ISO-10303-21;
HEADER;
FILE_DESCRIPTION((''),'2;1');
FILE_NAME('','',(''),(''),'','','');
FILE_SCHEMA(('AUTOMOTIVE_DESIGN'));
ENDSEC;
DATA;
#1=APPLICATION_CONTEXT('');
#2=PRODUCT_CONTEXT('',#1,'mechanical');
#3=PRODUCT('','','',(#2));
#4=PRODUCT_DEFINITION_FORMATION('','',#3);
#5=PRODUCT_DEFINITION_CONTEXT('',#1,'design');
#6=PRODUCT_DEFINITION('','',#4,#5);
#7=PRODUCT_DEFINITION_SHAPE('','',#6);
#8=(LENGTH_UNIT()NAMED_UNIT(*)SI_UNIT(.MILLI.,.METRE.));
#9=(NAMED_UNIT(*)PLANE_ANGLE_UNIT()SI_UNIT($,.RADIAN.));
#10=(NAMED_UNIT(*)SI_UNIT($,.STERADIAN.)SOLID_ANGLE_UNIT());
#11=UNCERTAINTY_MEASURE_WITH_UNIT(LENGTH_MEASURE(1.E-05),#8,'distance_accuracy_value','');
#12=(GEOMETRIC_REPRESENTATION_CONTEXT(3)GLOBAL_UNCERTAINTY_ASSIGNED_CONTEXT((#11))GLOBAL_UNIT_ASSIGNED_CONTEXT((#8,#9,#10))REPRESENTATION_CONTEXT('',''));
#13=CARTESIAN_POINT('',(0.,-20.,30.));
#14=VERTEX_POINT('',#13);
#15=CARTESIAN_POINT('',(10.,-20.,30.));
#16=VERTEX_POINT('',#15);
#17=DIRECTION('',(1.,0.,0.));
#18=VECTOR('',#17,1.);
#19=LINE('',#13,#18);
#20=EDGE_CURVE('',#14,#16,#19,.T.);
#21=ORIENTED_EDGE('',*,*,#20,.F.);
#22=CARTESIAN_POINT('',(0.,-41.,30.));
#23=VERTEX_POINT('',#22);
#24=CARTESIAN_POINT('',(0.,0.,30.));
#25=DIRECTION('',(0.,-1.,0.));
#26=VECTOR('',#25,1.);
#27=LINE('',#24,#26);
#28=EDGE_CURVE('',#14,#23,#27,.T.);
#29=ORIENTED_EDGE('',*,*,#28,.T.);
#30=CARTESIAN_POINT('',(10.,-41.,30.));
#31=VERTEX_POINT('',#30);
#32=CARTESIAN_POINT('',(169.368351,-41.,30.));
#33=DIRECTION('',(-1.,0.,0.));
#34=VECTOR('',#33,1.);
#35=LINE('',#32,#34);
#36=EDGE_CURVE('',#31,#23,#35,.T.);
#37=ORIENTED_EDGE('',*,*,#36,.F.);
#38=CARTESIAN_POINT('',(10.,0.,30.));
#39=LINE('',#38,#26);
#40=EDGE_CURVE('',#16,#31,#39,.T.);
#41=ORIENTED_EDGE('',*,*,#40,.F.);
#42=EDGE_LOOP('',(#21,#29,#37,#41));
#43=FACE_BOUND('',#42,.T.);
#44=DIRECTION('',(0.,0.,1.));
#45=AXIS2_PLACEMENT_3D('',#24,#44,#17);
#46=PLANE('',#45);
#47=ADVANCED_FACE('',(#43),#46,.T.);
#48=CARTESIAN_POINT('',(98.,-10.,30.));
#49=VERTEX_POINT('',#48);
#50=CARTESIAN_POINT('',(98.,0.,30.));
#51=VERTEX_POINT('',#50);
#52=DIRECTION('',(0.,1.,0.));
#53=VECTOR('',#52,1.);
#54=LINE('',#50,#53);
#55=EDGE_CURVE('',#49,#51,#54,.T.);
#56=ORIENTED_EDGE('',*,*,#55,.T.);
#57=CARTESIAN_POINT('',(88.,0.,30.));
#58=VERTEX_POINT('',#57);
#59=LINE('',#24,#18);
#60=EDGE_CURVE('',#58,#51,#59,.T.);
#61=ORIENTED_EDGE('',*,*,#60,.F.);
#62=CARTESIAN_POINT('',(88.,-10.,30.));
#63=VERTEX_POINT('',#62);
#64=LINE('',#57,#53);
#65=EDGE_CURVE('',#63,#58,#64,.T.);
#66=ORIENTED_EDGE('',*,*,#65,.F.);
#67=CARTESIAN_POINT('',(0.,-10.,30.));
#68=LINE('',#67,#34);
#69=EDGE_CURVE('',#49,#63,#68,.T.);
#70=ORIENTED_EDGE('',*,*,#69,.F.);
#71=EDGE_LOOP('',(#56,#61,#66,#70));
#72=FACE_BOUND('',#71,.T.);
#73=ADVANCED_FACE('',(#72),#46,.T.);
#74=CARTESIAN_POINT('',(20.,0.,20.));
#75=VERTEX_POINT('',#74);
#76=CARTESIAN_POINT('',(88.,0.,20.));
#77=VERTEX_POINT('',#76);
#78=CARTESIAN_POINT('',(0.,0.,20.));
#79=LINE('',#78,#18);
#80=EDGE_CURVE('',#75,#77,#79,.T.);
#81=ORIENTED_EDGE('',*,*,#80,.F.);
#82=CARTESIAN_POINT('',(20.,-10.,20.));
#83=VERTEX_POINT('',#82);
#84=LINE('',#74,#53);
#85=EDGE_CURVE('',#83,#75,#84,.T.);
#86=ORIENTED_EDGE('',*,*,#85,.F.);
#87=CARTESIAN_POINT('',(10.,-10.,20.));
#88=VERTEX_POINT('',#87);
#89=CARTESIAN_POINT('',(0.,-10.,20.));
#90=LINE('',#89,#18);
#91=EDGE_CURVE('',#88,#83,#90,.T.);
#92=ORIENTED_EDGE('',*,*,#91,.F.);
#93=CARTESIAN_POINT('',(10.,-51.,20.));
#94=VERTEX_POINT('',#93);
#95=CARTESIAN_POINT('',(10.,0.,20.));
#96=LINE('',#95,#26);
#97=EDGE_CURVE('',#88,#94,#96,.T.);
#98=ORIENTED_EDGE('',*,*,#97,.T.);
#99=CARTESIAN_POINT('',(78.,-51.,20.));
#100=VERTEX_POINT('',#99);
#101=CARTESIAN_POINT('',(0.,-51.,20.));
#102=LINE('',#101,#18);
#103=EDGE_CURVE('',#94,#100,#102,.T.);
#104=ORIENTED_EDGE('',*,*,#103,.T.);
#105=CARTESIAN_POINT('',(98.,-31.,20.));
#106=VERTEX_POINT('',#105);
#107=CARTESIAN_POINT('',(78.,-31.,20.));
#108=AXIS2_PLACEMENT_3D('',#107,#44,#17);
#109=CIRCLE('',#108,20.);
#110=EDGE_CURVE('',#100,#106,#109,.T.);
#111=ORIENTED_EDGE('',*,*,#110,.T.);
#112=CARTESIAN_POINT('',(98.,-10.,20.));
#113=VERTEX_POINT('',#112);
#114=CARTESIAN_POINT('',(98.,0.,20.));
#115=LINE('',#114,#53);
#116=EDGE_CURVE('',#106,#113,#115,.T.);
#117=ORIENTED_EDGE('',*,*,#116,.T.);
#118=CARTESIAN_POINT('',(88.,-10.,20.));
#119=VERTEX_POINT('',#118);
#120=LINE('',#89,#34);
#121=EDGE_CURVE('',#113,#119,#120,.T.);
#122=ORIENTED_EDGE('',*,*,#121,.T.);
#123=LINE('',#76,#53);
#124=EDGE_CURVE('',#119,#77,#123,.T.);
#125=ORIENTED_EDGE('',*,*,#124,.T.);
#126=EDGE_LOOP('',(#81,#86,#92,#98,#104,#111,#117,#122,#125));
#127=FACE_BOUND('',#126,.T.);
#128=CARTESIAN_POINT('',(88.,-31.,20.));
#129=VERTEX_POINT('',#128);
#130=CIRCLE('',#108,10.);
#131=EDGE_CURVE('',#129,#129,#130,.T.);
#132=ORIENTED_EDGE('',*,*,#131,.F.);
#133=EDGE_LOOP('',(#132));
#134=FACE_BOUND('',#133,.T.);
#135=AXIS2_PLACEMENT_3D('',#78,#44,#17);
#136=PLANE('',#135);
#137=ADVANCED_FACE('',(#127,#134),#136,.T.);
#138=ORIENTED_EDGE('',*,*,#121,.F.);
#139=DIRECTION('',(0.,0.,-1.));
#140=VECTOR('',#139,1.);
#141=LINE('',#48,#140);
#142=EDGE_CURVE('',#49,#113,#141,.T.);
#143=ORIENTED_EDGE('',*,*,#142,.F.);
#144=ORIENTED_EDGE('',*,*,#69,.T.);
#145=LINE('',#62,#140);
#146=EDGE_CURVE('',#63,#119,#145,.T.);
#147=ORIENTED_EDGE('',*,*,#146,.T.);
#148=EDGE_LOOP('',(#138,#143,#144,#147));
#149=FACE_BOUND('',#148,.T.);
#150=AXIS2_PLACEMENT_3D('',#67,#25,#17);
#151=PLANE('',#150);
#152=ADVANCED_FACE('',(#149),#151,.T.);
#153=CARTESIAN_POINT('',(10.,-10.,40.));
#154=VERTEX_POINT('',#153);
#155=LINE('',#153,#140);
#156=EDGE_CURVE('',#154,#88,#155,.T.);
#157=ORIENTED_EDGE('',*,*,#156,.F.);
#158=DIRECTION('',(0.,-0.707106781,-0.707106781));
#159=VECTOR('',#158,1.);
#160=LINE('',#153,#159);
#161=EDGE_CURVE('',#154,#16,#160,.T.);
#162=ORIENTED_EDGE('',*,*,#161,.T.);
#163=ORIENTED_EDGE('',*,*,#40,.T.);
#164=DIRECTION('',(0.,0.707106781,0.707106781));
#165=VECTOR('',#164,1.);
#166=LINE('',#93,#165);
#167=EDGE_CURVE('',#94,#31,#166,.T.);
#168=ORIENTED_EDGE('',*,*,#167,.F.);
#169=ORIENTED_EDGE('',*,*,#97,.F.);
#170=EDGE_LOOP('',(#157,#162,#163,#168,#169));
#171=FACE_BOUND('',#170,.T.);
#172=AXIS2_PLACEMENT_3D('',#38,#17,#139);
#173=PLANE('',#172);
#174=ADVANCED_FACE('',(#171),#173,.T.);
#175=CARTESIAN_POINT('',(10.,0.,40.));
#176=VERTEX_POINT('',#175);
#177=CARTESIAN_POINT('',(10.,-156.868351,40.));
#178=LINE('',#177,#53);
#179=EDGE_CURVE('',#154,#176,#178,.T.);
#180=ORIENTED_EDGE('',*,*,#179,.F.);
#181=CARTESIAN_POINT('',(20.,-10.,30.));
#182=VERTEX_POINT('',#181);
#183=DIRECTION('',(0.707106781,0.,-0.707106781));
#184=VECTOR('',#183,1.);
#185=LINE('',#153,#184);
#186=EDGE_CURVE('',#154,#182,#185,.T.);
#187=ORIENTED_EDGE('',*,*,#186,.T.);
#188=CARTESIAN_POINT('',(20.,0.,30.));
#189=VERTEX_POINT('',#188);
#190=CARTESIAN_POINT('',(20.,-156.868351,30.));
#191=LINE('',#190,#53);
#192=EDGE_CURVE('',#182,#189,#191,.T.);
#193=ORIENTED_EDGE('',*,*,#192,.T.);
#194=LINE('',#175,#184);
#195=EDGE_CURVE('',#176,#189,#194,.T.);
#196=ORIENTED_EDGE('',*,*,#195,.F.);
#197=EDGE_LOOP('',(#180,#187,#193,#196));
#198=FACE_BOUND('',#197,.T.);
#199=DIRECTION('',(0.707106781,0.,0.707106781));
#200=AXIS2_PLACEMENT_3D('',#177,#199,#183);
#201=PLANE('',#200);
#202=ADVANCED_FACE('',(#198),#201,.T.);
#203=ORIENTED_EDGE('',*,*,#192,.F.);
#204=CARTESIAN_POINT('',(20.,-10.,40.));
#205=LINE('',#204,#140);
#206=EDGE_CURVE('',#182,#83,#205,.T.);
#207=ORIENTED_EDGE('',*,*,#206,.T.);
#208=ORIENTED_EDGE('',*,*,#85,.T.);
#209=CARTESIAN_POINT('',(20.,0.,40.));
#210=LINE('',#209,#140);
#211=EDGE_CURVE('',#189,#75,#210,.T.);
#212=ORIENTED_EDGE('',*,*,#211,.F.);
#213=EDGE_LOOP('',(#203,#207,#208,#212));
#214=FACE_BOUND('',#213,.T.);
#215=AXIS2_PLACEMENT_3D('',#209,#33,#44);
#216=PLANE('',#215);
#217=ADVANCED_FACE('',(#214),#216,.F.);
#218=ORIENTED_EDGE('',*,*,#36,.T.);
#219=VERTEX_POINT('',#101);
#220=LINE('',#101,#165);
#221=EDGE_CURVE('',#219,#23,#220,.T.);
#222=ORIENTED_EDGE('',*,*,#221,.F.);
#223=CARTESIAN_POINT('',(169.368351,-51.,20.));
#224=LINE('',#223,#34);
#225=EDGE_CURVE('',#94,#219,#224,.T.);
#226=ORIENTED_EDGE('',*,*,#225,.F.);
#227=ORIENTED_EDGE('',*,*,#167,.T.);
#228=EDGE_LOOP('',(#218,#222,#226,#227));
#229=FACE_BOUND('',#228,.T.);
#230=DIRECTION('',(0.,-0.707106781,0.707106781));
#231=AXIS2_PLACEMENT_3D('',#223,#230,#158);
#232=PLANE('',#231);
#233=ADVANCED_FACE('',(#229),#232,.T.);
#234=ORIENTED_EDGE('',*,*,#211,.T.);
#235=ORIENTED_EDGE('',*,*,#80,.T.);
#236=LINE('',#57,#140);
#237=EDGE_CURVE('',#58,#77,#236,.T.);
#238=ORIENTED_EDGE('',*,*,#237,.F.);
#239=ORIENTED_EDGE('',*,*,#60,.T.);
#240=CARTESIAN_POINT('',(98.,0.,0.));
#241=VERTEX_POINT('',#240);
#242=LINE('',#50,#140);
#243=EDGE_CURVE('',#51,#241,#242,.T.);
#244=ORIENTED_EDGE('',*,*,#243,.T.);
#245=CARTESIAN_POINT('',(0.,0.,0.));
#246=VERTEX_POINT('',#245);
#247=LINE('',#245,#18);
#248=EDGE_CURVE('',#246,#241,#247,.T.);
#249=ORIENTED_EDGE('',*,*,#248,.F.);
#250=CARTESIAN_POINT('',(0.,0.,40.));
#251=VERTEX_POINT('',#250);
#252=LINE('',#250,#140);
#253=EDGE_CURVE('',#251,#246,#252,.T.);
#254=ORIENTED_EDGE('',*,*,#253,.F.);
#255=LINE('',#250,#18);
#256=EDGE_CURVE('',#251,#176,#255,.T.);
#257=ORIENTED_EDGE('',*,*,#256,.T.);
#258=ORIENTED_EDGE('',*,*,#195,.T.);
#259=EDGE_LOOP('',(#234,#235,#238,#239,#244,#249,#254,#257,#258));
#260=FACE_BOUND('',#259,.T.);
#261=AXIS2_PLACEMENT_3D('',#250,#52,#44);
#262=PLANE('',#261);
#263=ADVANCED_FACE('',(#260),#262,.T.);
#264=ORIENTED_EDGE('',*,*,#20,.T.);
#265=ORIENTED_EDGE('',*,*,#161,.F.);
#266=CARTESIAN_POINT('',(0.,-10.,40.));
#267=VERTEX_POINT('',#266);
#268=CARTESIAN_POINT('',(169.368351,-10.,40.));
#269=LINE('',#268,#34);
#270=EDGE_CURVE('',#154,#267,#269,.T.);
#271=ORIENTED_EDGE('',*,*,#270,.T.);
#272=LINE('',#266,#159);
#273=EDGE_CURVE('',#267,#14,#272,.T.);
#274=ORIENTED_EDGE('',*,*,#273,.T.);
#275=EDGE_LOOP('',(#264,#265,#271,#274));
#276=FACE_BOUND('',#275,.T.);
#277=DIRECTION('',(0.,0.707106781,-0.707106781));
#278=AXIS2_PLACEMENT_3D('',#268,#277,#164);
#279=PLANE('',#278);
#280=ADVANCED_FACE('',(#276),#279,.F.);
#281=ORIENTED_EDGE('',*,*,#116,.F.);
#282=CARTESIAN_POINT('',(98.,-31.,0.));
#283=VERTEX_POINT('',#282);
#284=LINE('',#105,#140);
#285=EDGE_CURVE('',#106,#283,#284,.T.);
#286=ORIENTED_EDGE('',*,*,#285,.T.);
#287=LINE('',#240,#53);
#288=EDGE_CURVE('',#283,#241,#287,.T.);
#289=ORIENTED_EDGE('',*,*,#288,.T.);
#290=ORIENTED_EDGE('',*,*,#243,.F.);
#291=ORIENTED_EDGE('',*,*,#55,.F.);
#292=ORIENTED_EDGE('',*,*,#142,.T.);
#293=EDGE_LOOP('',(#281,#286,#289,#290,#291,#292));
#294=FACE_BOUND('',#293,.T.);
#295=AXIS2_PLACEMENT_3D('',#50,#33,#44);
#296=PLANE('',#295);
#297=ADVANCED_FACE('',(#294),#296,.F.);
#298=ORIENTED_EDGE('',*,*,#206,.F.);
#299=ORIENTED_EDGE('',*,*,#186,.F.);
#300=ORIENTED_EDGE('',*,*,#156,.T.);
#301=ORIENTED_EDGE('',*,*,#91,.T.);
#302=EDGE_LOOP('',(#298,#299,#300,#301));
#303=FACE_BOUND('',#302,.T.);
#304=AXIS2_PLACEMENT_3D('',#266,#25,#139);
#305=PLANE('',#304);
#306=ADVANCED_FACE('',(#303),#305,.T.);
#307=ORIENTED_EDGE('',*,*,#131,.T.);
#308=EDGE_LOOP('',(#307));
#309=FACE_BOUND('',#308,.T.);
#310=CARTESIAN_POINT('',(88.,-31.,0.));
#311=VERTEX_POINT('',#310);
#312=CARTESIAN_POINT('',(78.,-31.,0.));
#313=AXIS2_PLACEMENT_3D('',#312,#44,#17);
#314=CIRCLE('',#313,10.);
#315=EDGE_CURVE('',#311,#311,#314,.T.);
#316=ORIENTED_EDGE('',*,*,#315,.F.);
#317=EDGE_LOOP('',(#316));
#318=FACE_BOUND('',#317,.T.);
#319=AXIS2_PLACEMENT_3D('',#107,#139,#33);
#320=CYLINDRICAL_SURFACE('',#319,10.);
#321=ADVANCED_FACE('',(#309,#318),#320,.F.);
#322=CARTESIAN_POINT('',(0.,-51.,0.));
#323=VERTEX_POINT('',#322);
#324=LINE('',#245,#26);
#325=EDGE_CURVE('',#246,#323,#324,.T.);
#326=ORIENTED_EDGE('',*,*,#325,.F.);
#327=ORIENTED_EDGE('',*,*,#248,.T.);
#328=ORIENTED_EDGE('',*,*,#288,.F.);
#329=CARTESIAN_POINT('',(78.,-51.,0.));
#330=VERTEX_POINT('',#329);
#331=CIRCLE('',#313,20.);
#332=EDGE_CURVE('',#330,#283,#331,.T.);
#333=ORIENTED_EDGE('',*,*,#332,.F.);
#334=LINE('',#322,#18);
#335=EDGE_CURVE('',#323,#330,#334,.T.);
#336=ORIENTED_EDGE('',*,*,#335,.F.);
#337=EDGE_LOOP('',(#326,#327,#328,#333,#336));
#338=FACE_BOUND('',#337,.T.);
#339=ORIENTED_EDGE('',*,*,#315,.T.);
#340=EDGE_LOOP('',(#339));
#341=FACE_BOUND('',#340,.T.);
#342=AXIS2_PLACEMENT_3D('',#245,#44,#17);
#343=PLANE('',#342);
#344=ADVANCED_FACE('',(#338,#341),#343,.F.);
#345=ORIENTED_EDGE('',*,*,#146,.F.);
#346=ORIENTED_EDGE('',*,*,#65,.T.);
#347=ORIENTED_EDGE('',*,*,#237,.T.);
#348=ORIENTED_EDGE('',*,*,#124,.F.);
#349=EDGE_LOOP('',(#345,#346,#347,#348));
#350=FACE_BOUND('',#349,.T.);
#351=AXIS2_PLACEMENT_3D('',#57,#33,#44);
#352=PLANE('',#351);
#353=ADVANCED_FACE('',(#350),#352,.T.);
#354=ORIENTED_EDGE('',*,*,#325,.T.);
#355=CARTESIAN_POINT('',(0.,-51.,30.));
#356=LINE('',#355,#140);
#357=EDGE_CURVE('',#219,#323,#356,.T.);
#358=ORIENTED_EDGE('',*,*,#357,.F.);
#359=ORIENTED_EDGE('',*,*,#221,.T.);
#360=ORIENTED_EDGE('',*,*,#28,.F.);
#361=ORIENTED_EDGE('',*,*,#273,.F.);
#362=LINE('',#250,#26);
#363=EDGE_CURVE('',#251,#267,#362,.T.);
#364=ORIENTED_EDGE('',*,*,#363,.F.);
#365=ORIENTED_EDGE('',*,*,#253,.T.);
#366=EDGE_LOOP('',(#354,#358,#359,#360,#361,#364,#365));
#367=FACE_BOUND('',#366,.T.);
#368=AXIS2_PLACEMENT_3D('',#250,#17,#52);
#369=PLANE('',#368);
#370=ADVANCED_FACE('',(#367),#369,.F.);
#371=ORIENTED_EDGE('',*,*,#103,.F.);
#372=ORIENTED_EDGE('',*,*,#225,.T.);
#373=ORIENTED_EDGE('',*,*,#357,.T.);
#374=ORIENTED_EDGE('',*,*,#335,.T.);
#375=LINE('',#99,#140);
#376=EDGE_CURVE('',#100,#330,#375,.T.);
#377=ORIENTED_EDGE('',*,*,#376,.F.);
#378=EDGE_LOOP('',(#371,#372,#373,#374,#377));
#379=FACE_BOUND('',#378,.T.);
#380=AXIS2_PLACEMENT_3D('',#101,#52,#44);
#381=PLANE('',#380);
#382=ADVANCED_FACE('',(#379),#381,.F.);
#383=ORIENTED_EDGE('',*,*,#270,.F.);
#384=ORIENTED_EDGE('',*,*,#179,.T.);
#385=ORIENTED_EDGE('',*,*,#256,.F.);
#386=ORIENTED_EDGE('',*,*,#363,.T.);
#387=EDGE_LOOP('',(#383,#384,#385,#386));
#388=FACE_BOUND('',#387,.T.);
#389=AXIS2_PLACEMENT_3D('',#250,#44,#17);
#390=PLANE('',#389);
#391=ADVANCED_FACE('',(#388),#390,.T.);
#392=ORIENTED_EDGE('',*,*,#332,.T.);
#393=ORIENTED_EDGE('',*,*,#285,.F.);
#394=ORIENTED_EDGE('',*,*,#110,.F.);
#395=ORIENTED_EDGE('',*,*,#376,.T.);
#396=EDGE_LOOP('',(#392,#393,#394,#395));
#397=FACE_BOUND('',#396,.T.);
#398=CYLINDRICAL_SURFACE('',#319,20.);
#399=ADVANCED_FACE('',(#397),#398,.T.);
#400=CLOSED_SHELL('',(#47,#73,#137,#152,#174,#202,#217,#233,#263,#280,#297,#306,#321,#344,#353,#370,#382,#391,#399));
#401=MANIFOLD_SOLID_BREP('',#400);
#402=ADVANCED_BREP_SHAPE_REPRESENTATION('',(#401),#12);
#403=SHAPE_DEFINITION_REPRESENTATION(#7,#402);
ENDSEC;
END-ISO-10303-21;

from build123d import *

# Parameters (mm, degrees)
SKETCH2_W               = 10
SKETCH2_H               = 10
BOSS_EXTRUDE2_DEPTH     = 30
SKETCH2_5_R             = 10
BOSS_EXTRUDE3_DEPTH     = 20
SKETCH2_6_W             = 10
SKETCH2_6_H             = 10
BOSS_EXTRUDE4_DEPTH     = 40
SKETCH2_7_W             = 10
SKETCH2_7_H             = 21
BOSS_EXTRUDE5_DEPTH     = 30
SKETCH2_8_W             = 10
SKETCH2_8_H             = 10
BOSS_EXTRUDE6_DEPTH     = 40
SKETCH2_9_W             = 10
SKETCH2_9_H             = 10
BOSS_EXTRUDE7_DEPTH     = 30
SKETCH2_10_W            = 10
SKETCH2_10_H            = 10
BOSS_EXTRUDE8_DEPTH     = 40
CUT_EXTRUDE3_DEPTH      = 114.512113891
CUT_EXTRUDE3_DEPTH_BACK = 10
CUT_EXTRUDE5_START      = -10
CUT_EXTRUDE5_DEPTH      = 10
CUT_EXTRUDE6_DEPTH      = 110.293183685
CUT_EXTRUDE6_DEPTH_BACK = 10


# Read off the part's stored shape, not the designer's step: Cut-Extrude5
with BuildPart() as part:
    # Sketch2 → Boss-Extrude2 (new body)
    with BuildSketch(Plane.XY):
        with Locations((93, -5)):
            Rectangle(SKETCH2_W, SKETCH2_H)
    extrude(amount=BOSS_EXTRUDE2_DEPTH)

    # Sketch2<5> → Boss-Extrude3 (add)
    with BuildSketch(Plane.XY):
        with BuildLine():
            Line((88, 0), (20, 0))
            Line((20, 0), (20, -10))
            Line((20, -10), (10, -10))
            Line((10, -10), (10, -20))
            Line((10, -20), (10, -41))
            Line((10, -41), (10, -51))
            Line((10, -51), (78, -51))
            ThreePointArc((78, -51), (92.142135624, -45.142135624), (98, -31))
            Line((98, -31), (98, -10))
            Line((98, -10), (88, -10))
            Line((88, -10), (88, 0))
        make_face()
        with Locations((78, -31)):
            Circle(SKETCH2_5_R, mode=Mode.SUBTRACT)
    extrude(amount=BOSS_EXTRUDE3_DEPTH)

    # Sketch2<7> → Boss-Extrude5 (add)
    with BuildSketch(Plane.XY):
        with Locations((5, -30.5)):
            Rectangle(SKETCH2_7_W, SKETCH2_7_H)
    extrude(amount=BOSS_EXTRUDE5_DEPTH)



with BuildPart() as body_2:
    # Sketch2<6> → Boss-Extrude4 (new body)
    with BuildSketch(Plane.XY):
        with Locations((5, -5)):
            Rectangle(SKETCH2_6_W, SKETCH2_6_H)
    extrude(amount=BOSS_EXTRUDE4_DEPTH)


with BuildPart() as part_1:
    add(part.part)

    add(body_2.part)  # Boss-Extrude6 merges body 2
    # Sketch2<8> → Boss-Extrude6 (add)
    with BuildSketch(Plane.XY):
        with Locations((15, -5)):
            Rectangle(SKETCH2_8_W, SKETCH2_8_H)
    extrude(amount=BOSS_EXTRUDE6_DEPTH)

    # Sketch2<9> → Boss-Extrude7 (add)
    with BuildSketch(Plane.XY):
        with Locations((5, -46)):
            Rectangle(SKETCH2_9_W, SKETCH2_9_H)
    extrude(amount=BOSS_EXTRUDE7_DEPTH)

    # Sketch2<10> → Boss-Extrude8 (add)
    with BuildSketch(Plane.XY):
        with Locations((5, -15)):
            Rectangle(SKETCH2_10_W, SKETCH2_10_H)
    extrude(amount=BOSS_EXTRUDE8_DEPTH)

    # Sketch6 → Cut-Extrude3 (cut, two sides: drawn at the far end of the back side and taken through both)
    with BuildSketch(Plane.XZ.offset(10).offset(-CUT_EXTRUDE3_DEPTH_BACK)):
        Polygon((20, 40), (10, 40), (20, 30), align=None)
    extrude(amount=CUT_EXTRUDE3_DEPTH + CUT_EXTRUDE3_DEPTH_BACK, mode=Mode.SUBTRACT)

    # Cut-Extrude5 outline → Cut-Extrude5 (cut)
    with BuildSketch(Plane(origin=(10, 0, 0), x_dir=(0, 0, -1), z_dir=(1, 0, 0)).offset(CUT_EXTRUDE5_START)):
        Polygon((-40, -20), (-30, -20), (-40, -10), align=None)
    extrude(amount=CUT_EXTRUDE5_DEPTH, mode=Mode.SUBTRACT)

    # Sketch8 → Cut-Extrude6 (cut, two sides: drawn at the far end of the back side and taken through both)
    with BuildSketch(Plane(origin=(10, 0, 0), x_dir=(0, 0, -1), z_dir=(1, 0, 0)).offset(-CUT_EXTRUDE6_DEPTH_BACK)):
        Polygon((64.543643605, -135.543643605), (-20, -51), (-30, -41), (-114.543643605, 43.543643605), (-283.630930815, -125.543643605), (-104.543643605, -304.630930815), align=None)
    extrude(amount=CUT_EXTRUDE6_DEPTH + CUT_EXTRUDE6_DEPTH_BACK, mode=Mode.SUBTRACT)


solid = part_1.part
